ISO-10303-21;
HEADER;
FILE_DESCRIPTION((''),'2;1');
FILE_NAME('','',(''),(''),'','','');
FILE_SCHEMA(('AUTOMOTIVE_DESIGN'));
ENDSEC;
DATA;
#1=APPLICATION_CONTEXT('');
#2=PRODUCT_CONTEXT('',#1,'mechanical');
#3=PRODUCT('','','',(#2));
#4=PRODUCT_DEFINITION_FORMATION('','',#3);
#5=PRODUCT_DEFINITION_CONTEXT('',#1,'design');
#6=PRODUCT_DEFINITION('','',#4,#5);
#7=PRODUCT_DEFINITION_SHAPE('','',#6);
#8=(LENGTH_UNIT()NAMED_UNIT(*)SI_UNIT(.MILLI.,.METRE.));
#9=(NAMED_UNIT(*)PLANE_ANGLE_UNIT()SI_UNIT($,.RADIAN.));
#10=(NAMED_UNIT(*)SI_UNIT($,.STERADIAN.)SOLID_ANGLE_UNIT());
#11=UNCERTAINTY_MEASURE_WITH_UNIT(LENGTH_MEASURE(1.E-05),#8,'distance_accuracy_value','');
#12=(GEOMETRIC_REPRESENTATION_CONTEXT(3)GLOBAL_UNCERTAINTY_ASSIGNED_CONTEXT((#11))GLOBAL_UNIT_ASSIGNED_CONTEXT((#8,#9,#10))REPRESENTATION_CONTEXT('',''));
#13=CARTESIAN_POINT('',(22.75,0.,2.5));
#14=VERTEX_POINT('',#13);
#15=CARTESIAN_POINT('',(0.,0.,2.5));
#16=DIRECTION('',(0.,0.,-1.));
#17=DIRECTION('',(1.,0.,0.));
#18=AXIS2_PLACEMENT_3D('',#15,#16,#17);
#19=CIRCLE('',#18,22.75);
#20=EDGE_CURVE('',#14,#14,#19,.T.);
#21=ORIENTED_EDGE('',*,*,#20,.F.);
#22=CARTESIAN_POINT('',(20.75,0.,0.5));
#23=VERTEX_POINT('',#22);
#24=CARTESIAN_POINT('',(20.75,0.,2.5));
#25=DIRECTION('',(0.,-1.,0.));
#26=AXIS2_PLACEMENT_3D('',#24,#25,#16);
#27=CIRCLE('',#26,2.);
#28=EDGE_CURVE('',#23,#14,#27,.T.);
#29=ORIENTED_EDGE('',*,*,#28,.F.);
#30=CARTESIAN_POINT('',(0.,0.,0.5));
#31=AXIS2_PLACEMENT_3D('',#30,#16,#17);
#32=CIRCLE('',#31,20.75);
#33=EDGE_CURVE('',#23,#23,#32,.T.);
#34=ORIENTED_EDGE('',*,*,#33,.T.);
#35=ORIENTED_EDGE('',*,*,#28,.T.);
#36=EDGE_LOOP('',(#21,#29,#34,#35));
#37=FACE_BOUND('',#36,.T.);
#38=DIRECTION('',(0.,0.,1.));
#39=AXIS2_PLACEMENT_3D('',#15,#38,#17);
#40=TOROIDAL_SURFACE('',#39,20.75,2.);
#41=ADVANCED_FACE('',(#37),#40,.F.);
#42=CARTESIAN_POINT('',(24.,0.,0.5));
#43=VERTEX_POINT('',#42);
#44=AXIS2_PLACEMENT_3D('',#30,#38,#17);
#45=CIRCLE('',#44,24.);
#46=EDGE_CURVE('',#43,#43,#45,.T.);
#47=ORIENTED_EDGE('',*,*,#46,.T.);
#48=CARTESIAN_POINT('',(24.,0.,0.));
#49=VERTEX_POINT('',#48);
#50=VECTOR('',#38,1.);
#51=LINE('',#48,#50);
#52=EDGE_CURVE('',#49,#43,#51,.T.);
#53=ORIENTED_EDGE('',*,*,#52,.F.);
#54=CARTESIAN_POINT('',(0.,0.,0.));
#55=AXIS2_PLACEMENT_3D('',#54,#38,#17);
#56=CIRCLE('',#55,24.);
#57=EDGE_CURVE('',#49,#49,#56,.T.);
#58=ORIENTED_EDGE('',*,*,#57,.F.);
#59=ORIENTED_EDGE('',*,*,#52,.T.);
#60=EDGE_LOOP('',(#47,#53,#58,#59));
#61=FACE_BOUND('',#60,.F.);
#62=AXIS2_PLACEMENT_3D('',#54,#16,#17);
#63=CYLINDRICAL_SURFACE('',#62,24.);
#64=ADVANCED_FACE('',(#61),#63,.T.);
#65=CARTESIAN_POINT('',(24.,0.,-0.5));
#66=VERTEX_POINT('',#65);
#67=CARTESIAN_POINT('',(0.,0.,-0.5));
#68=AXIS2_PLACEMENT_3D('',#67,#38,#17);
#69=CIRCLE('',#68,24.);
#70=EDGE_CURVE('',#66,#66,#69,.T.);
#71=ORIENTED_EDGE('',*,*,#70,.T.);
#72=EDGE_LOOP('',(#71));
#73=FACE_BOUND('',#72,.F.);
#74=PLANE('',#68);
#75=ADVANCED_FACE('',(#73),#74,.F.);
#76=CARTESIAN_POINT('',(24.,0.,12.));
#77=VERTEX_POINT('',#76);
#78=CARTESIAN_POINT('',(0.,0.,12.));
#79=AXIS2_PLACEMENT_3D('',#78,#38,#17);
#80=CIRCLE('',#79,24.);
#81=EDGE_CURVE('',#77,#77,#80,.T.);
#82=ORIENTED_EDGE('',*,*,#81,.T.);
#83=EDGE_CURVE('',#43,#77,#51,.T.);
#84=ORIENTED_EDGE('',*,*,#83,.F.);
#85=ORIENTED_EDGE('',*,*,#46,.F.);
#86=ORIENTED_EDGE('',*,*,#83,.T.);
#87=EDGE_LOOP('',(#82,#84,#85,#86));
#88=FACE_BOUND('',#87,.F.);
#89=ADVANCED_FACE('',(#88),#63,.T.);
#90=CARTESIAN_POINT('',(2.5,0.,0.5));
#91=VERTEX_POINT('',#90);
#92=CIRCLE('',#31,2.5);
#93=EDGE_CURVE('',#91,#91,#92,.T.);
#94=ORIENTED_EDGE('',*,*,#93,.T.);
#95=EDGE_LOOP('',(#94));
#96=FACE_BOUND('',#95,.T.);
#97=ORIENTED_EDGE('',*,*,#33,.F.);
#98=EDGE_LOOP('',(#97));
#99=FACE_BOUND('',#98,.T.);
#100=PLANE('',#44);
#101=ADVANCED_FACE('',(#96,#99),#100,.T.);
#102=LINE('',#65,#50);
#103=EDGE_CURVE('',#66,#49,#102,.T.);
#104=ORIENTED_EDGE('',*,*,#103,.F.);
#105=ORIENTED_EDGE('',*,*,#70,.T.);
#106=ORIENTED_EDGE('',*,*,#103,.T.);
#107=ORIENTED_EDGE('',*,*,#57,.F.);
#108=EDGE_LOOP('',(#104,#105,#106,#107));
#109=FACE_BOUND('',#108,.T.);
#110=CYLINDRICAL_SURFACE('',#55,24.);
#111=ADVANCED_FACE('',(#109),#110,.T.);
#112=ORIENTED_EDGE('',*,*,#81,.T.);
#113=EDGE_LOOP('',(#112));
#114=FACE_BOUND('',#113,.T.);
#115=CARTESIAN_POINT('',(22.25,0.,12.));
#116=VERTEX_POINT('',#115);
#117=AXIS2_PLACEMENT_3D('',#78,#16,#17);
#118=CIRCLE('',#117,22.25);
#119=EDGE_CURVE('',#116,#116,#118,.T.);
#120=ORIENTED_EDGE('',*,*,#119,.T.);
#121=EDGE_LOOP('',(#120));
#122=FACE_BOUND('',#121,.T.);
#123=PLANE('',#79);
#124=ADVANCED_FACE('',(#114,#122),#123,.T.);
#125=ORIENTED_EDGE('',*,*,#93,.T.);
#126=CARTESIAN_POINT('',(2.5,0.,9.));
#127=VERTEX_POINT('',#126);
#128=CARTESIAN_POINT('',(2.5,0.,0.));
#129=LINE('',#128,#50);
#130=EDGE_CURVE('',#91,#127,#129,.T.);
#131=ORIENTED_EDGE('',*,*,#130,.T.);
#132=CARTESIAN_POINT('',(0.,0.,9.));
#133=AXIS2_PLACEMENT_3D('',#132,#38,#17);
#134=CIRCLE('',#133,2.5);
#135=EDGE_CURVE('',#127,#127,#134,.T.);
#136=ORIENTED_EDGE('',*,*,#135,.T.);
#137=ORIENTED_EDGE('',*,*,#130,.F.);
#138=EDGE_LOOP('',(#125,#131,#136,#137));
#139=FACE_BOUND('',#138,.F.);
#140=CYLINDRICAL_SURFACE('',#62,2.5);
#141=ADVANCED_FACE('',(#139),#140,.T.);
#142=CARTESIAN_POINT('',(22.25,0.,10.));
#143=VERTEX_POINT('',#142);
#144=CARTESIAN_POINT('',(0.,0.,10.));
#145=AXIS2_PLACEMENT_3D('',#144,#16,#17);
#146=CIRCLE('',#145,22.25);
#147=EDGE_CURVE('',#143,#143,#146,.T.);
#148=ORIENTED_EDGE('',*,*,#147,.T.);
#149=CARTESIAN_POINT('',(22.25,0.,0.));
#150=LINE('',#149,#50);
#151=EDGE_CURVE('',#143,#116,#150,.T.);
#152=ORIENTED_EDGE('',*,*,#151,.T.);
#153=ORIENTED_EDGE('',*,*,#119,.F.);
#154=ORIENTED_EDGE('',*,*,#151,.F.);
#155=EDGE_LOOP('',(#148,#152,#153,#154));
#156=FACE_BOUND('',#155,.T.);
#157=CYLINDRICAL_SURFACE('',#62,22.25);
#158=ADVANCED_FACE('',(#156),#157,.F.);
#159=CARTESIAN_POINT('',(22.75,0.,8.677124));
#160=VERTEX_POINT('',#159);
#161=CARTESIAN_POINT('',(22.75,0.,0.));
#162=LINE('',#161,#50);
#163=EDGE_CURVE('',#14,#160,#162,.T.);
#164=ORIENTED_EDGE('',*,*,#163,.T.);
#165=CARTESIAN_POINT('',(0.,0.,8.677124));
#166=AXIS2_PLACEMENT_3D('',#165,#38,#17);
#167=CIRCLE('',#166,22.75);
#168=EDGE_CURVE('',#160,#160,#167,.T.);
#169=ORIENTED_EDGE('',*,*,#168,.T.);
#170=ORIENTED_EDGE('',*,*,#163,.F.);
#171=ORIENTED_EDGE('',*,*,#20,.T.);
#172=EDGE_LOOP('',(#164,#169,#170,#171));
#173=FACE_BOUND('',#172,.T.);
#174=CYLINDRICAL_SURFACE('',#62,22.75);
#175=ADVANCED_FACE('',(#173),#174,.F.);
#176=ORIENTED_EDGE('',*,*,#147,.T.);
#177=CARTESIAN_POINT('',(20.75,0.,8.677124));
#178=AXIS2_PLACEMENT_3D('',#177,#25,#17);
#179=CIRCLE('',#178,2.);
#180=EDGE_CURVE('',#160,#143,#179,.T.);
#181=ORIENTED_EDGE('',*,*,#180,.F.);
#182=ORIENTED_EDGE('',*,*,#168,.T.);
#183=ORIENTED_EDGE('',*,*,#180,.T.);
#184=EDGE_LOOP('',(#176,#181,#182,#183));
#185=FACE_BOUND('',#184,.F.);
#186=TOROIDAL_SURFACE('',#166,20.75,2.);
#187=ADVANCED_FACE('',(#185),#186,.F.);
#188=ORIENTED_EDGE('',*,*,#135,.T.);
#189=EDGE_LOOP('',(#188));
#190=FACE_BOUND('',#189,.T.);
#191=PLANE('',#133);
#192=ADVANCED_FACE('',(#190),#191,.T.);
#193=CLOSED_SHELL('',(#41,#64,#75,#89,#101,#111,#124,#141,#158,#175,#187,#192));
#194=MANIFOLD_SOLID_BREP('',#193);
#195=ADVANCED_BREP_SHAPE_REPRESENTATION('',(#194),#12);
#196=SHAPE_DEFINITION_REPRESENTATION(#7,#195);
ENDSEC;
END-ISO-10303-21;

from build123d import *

# Parameters (mm, degrees)
F0_R     = 24
F1_DEPTH = 12
F2_R     = 22.25
F3_DEPTH = 13
F5_R     = 22.75
F6_DEPTH = 10
F4_R     = 2.5
F7_DEPTH = 9
F8_R     = 24
F9_DEPTH = 0.5


# Not quite as in the source:
# - a fillet or chamfer that OpenCascade refuses, or shapes differently, is made with other operations: its cross-section is extruded or revolved along the edge and cut away or added


with BuildPart() as f1:
    # F0 (on Top) → F1 (new body)
    with BuildSketch(Plane.XY):
        Circle(F0_R)
    extrude(amount=F1_DEPTH)

    # F2 (on Top) → F3 (cut)
    with BuildSketch(Plane.XY):
        Circle(F2_R)
    extrude(amount=F3_DEPTH, mode=Mode.SUBTRACT)

    # F5 (on Top) → F6 (cut)
    with BuildSketch(Plane.XY):
        Circle(F5_R)
    extrude(amount=F6_DEPTH, mode=Mode.SUBTRACT)



with BuildPart() as f7:
    # F4 (on Top) → F7 (new body)
    with BuildSketch(Plane.XY):
        Circle(F4_R)
    extrude(amount=F7_DEPTH)


with BuildPart() as f1_1:
    add(f1.part)

    add(f7.part)  # F9 merges F7
    # F8 (on Top) → F9 (join, symmetric)
    with BuildSketch(Plane.XY):
        Circle(F8_R)
    extrude(amount=F9_DEPTH, both=True)

    # F10: fillet of radius 2 on 3 edges, made by hand

    # F10_s1 → F10_t2 (revolve)
    with BuildSketch(Plane.XZ):
        with BuildLine():
            ThreePointArc((20.75, 0.5), (22.1642135624, 1.0857864376), (22.75, 2.5))
            Line((22.75, 2.5), (22.75, 0.5))
            Line((22.75, 0.5), (20.75, 0.5))
        make_face()
    revolve(axis=Axis((0, 0, 0.5), (0, 0, -1)))

    # F10_s3 → F10_t4 (revolve)
    with BuildSketch(Plane.XZ):
        with BuildLine():
            ThreePointArc((22.75, 8.6771243445), (22.6208286934, 9.3842311257), (22.25, 10))
            Line((22.25, 10), (22.75, 10))
            Line((22.75, 10), (22.75, 8.6771243445))
        make_face()
    revolve(axis=Axis((0, 0, 10), (0, 0, 1)))


solid = f1_1.part
